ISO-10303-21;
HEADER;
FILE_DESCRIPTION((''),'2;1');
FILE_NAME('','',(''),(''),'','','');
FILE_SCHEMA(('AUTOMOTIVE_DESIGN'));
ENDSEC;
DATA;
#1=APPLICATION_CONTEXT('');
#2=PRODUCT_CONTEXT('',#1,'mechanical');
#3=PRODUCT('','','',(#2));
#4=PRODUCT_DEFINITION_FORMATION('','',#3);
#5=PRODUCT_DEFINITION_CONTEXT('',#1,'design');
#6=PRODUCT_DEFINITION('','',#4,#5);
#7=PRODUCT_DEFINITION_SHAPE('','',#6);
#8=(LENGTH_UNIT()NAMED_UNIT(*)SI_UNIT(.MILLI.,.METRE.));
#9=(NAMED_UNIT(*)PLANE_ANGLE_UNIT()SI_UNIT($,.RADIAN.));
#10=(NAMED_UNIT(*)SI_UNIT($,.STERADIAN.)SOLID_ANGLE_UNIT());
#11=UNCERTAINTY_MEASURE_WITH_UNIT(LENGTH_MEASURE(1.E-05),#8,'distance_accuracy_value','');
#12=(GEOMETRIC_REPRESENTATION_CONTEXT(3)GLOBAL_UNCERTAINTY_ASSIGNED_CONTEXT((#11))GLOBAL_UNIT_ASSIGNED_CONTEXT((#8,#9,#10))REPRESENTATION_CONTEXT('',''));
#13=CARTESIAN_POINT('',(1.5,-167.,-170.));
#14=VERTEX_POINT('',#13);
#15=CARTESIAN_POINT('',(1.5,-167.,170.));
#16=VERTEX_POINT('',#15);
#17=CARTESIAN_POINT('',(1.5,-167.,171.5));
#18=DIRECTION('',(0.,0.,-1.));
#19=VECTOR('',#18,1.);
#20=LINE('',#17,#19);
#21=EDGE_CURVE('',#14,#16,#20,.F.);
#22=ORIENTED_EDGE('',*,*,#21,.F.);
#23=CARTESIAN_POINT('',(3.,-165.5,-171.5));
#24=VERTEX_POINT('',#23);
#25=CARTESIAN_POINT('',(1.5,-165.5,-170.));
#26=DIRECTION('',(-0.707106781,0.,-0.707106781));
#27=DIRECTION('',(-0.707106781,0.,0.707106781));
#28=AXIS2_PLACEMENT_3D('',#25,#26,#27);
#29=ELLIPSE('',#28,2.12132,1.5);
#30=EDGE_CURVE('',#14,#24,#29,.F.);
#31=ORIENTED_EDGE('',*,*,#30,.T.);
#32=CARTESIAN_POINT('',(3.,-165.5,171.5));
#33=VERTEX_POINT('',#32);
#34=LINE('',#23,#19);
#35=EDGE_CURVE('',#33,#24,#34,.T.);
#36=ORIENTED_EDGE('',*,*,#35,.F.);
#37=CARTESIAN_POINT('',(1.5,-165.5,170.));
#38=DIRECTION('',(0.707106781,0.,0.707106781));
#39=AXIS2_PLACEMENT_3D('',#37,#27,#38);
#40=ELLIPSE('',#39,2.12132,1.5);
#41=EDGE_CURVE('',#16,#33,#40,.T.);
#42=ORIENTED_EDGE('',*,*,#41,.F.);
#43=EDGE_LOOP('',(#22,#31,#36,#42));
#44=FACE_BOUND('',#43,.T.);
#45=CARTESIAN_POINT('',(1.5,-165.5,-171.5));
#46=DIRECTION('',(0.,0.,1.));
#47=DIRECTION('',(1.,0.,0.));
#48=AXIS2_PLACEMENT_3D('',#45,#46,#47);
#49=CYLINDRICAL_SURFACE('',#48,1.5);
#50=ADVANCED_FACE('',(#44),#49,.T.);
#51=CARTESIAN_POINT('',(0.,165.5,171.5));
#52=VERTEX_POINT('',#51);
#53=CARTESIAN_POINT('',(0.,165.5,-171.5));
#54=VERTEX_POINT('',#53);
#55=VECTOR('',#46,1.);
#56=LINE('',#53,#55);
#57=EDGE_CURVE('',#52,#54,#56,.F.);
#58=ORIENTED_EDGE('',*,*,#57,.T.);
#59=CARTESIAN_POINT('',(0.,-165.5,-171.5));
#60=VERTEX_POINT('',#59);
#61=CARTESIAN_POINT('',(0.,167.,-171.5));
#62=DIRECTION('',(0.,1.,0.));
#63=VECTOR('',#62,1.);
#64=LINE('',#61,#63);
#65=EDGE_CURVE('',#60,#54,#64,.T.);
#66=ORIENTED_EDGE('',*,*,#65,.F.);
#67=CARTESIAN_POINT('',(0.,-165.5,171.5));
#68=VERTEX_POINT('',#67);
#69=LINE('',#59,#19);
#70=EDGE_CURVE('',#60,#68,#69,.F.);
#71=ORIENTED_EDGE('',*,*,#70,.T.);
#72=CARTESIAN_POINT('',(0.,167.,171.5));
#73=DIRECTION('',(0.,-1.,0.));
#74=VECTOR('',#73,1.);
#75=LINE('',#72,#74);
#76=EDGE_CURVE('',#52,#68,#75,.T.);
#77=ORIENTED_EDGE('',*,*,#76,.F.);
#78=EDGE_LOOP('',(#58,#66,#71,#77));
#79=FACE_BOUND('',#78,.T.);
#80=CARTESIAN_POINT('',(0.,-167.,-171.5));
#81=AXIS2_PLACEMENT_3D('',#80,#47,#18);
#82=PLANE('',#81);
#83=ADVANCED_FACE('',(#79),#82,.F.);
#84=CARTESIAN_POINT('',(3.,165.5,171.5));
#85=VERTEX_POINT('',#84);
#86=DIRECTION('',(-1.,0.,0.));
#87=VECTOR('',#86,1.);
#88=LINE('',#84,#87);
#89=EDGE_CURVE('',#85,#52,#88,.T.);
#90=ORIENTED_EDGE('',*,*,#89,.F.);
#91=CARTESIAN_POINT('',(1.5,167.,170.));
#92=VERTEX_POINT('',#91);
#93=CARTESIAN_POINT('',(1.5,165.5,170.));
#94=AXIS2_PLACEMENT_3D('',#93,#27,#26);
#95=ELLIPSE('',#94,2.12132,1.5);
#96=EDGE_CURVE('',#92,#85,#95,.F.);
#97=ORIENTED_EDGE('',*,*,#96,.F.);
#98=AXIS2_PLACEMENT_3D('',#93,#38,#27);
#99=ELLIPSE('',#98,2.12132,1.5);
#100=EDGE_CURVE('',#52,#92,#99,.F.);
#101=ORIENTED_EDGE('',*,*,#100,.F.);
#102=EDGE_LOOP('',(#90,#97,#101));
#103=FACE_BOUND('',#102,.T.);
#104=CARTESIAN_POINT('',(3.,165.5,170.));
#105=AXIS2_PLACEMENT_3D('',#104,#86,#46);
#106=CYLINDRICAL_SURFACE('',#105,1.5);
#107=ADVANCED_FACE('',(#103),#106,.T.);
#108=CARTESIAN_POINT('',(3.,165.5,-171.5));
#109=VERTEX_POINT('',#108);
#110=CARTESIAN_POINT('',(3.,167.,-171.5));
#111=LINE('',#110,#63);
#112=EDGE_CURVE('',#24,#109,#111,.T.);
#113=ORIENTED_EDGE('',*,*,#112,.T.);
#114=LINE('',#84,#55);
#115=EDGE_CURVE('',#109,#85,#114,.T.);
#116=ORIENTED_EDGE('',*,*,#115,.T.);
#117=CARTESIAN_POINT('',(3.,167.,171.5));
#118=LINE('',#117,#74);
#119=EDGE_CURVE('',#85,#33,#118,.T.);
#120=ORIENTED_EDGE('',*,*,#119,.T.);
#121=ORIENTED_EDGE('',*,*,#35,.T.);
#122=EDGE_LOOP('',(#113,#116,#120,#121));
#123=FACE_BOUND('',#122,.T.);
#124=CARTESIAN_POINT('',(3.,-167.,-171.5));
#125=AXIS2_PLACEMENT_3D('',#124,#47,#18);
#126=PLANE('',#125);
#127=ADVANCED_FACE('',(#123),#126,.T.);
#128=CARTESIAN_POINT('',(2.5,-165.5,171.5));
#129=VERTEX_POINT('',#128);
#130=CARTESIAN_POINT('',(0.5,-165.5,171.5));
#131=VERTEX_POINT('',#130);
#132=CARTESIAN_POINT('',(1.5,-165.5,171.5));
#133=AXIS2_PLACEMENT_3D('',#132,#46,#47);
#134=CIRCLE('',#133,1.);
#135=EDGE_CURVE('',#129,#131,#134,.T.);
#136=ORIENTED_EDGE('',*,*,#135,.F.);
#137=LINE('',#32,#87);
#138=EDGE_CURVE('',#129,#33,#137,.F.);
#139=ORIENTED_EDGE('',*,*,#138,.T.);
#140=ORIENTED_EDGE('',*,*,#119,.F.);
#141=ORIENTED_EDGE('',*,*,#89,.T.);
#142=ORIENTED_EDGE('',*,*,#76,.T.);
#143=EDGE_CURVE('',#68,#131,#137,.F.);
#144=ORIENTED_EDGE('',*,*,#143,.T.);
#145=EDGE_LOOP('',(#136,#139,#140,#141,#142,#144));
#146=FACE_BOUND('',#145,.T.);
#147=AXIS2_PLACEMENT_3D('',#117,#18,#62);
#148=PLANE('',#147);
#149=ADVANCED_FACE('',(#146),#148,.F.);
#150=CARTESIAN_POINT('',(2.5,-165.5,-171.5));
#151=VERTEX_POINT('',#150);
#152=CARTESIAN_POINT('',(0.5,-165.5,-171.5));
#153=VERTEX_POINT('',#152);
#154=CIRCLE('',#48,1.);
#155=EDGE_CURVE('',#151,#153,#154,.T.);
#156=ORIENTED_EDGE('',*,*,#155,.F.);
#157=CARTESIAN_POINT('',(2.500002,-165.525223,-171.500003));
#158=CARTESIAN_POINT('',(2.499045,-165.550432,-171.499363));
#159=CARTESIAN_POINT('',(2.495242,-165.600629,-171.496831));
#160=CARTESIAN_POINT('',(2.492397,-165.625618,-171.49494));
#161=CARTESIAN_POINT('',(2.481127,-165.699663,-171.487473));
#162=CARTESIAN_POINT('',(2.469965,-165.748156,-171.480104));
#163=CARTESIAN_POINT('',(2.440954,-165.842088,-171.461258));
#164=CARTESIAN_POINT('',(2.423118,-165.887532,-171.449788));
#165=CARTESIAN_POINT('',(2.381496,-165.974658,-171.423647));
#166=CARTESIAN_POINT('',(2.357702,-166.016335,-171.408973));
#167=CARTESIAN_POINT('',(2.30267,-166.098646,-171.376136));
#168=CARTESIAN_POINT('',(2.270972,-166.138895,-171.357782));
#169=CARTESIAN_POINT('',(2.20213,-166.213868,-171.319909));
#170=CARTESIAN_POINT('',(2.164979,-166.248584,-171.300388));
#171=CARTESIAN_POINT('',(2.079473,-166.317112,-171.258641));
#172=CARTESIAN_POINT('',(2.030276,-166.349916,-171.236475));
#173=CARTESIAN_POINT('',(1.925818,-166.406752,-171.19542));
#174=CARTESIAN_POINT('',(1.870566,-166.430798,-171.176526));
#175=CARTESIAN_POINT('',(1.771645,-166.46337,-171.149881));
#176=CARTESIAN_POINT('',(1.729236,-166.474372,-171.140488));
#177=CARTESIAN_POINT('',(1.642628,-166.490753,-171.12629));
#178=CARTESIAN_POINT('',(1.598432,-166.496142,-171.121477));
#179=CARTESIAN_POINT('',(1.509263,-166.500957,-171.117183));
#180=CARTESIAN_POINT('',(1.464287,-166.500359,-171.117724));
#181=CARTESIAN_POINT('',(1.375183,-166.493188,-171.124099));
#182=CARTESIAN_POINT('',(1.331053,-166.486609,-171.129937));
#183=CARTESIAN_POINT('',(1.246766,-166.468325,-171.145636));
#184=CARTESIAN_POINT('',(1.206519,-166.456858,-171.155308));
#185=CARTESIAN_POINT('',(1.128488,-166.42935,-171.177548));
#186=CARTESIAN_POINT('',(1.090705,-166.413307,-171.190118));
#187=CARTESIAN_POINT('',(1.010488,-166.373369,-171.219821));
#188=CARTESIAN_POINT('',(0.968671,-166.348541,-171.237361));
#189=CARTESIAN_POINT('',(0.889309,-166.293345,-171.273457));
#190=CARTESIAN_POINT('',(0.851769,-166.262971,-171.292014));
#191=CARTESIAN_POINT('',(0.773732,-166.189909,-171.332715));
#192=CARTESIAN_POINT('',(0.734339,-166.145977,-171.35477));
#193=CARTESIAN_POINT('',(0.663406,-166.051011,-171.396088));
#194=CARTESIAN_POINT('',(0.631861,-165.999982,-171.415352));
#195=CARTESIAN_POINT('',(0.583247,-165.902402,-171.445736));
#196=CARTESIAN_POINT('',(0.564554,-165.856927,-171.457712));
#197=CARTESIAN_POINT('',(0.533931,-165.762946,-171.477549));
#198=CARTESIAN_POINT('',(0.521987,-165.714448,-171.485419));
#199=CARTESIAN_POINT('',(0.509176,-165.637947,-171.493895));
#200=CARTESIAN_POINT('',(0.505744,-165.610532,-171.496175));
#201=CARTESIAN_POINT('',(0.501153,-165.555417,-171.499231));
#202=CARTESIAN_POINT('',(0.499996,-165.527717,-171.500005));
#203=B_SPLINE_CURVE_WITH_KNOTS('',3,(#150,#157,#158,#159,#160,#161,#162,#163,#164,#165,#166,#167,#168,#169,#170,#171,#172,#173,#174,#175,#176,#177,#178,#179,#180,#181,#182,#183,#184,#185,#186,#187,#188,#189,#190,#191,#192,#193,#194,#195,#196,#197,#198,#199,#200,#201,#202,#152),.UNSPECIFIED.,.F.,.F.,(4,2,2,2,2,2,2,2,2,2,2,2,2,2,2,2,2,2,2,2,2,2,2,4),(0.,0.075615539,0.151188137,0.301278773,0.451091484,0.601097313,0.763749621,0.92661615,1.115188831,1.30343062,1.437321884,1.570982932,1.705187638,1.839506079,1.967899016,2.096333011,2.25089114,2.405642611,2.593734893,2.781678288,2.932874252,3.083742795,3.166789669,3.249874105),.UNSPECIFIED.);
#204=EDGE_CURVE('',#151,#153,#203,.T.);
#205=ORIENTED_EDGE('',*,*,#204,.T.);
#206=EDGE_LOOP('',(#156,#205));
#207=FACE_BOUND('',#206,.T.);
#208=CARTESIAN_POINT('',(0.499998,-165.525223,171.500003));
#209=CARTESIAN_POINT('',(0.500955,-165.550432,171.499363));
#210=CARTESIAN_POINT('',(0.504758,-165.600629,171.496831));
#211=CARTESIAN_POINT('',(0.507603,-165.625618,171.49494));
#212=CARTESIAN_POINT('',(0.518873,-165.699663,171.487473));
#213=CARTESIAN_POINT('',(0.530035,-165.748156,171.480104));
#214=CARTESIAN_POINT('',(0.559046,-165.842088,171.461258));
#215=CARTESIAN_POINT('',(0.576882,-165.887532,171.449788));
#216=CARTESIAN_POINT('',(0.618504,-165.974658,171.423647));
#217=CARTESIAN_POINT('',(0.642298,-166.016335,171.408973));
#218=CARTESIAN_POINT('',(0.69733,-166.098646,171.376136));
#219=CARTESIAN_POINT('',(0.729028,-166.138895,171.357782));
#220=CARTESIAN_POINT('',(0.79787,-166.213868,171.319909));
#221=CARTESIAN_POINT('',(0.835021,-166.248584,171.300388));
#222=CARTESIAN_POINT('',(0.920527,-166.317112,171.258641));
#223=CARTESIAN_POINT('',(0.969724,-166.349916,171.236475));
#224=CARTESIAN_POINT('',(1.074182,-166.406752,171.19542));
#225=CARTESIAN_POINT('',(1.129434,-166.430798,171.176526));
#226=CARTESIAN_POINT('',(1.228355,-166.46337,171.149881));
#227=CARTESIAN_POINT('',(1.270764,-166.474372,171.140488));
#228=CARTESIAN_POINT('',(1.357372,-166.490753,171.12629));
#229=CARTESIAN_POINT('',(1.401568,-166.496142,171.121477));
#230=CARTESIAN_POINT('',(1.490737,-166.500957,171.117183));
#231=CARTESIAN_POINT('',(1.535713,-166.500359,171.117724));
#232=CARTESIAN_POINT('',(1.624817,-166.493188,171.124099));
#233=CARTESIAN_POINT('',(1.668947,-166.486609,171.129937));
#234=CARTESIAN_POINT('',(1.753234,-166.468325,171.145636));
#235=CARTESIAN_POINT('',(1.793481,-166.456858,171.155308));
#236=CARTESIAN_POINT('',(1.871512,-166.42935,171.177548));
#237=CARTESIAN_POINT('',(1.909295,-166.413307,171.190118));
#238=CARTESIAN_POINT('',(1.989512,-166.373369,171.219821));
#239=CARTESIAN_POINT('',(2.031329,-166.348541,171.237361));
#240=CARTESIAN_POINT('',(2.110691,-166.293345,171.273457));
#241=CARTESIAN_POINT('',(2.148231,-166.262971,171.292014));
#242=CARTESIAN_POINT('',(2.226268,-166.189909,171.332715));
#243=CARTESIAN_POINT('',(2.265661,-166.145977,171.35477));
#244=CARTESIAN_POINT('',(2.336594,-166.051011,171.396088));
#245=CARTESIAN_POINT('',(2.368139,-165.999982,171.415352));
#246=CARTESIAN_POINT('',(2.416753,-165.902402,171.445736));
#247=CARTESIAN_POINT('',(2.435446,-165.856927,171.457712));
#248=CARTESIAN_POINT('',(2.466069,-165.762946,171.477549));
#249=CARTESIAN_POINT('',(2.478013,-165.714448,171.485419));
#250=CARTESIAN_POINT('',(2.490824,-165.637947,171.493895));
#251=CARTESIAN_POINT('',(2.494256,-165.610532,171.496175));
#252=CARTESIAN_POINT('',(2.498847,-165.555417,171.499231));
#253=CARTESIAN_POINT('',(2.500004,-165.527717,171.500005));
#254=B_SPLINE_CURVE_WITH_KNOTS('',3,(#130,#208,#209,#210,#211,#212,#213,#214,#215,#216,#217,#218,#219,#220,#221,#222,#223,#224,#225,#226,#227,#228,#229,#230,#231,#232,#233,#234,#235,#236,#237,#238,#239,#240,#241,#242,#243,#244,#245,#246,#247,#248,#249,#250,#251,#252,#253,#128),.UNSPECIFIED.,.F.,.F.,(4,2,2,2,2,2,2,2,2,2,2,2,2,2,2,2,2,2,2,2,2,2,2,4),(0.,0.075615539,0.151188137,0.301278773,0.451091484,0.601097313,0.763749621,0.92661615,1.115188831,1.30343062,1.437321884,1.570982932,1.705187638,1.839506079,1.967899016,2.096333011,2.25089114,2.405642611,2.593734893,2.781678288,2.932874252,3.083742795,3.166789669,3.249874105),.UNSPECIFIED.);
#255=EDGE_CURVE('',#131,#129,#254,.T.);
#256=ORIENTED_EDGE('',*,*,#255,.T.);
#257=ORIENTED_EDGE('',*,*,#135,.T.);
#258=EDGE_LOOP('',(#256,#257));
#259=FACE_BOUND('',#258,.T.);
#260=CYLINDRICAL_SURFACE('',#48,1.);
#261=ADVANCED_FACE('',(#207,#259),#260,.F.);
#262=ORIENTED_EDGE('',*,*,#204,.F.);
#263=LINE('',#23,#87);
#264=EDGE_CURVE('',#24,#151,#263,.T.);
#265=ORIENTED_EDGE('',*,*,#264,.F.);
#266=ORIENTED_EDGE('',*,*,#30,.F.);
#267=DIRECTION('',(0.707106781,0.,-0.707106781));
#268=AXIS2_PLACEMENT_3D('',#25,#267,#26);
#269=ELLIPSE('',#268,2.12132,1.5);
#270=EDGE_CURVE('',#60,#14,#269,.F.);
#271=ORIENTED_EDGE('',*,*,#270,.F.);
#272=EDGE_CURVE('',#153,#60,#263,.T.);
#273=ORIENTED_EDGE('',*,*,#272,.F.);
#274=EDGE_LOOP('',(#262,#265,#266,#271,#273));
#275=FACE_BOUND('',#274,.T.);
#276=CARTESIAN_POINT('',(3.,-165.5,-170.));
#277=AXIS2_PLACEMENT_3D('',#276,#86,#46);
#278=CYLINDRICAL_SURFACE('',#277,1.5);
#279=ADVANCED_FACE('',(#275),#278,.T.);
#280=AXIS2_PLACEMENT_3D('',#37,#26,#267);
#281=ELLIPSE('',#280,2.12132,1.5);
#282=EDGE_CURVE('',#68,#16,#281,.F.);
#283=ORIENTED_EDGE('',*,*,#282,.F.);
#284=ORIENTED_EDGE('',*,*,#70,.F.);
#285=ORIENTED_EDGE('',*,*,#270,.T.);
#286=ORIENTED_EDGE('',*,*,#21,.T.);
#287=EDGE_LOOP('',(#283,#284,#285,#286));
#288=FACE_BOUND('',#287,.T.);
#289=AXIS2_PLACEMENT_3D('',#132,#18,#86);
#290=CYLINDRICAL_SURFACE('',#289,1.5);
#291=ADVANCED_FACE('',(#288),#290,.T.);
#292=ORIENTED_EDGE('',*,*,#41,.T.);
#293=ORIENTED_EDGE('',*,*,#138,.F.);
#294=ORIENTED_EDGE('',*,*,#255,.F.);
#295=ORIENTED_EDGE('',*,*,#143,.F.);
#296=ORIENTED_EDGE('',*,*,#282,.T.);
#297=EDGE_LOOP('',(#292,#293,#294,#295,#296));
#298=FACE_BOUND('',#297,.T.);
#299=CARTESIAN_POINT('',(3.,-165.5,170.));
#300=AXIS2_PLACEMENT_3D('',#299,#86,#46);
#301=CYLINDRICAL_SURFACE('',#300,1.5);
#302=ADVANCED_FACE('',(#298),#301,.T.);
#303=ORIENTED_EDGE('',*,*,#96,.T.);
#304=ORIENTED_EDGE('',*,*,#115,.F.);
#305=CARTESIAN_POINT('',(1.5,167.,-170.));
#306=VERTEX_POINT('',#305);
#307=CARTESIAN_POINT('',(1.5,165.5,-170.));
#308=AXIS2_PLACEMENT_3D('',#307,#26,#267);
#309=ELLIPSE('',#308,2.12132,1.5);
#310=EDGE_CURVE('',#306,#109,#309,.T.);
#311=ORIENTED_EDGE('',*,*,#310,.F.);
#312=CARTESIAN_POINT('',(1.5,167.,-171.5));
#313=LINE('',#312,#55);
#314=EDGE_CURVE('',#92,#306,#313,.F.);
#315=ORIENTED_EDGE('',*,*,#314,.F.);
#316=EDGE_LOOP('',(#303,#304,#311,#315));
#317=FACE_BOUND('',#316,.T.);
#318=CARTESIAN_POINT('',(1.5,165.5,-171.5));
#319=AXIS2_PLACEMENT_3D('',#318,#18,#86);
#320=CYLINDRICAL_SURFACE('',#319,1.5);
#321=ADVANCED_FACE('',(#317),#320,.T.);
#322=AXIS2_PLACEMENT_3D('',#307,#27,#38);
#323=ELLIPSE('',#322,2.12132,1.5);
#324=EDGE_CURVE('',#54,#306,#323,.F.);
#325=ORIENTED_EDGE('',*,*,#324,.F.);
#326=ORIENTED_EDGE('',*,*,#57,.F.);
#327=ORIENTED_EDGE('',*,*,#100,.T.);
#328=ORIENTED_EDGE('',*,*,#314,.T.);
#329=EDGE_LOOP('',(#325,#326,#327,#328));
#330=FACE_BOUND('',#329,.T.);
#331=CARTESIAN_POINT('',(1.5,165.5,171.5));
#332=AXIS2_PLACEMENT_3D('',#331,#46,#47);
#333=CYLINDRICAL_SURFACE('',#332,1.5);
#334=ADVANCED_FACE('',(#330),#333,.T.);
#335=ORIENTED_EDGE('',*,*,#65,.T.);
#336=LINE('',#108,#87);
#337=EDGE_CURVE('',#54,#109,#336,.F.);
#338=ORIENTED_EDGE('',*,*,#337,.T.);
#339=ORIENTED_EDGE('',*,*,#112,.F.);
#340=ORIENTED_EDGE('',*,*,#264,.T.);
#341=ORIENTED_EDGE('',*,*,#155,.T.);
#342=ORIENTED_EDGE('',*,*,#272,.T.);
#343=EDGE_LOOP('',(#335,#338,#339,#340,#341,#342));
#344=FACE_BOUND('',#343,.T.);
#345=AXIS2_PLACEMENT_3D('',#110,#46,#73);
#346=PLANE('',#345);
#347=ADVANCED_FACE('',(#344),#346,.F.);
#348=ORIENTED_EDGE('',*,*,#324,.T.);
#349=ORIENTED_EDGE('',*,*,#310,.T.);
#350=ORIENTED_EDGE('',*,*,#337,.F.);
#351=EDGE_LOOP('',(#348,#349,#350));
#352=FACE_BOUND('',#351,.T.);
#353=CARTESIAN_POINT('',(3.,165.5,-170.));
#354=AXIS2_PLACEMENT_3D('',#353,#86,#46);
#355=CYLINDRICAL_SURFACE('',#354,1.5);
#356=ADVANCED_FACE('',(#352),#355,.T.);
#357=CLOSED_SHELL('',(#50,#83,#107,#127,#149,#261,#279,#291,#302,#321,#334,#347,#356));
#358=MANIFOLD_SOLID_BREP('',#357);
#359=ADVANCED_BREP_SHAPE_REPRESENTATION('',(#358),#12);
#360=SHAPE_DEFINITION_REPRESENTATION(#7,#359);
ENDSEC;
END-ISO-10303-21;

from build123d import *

# Parameters (mm, degrees)
SKETCH_1_W          = 343
SKETCH_1_H          = 334
EXTRUDE_1_DEPTH     = 3
SKETCH_3_R          = 1
CUT_EXTRUDE_1_DEPTH = 382.506225375
FILLET_1_R          = 1.5
FILLET_2_R          = 1.5


# Some blends are built 0.0001 mm under size
with BuildPart() as part:
    # 草图1 → 凸台-拉伸1 (new body)
    with BuildSketch(Plane(origin=(0, 0, 0), x_dir=(0, 0, -1), z_dir=(1, 0, 0))):
        Rectangle(SKETCH_1_W, SKETCH_1_H)
    extrude(amount=EXTRUDE_1_DEPTH)

    # 草图3 → 切除-拉伸1 (cut, through all)
    with BuildSketch(Plane.XY.offset(171.5)):
        with Locations((1.5, -165.5)):
            Circle(SKETCH_3_R)
    extrude(amount=-CUT_EXTRUDE_1_DEPTH, mode=Mode.SUBTRACT)

    # 圆角1
    # the kernel refuses this fillet: 1.5 mm, written as the material it takes off along each edge
    with BuildSketch(Plane(origin=(3, -167, -175.25), x_dir=(0, 1, 0), z_dir=(0, 0, 1))) as fillet_1_piece_1:
        with BuildLine():
            CenterArc((FILLET_1_R, FILLET_1_R), FILLET_1_R, 180, 90)
            Line((0, FILLET_1_R), (0, 0))
            Line((0, 0), (FILLET_1_R, 0))
        make_face()
    extrude(amount=350.5, mode=Mode.SUBTRACT)
    with BuildSketch(Plane(origin=(0, -167, -175.25), x_dir=(0, 1, 0), z_dir=(0, 0, 1))) as fillet_1_piece_2:
        with BuildLine():
            CenterArc((FILLET_1_R, -FILLET_1_R), FILLET_1_R, 90, 90)
            Line((0, -FILLET_1_R), (0, 0))
            Line((0, 0), (FILLET_1_R, 0))
        make_face()
    extrude(amount=350.5, mode=Mode.SUBTRACT)
    with BuildSketch(Plane(origin=(-3.75, -167, -171.5), x_dir=(0, 1, 0), z_dir=(1, 0, 0))) as fillet_1_piece_3:
        with BuildLine():
            CenterArc((FILLET_1_R, FILLET_1_R), FILLET_1_R, 180, 90)
            Line((0, FILLET_1_R), (0, 0))
            Line((0, 0), (FILLET_1_R, 0))
        make_face()
    extrude(amount=10.5, mode=Mode.SUBTRACT)
    with BuildSketch(Plane(origin=(-3.75, -167, 171.5), x_dir=(0, 1, 0), z_dir=(1, 0, 0))) as fillet_1_piece_4:
        with BuildLine():
            CenterArc((FILLET_1_R, -FILLET_1_R), FILLET_1_R, 90, 90)
            Line((0, -FILLET_1_R), (0, 0))
            Line((0, 0), (FILLET_1_R, 0))
        make_face()
    extrude(amount=10.5, mode=Mode.SUBTRACT)

    # 圆角2
    fillet_2_edges = [part.edges().sort_by_distance(p)[0] for p in [
        (0, 167, 0),
        (3, 167, 0),
        (1.5, 167, 171.5),
        (1.5, 167, -171.5),
    ]]
    fillet(fillet_2_edges, radius=FILLET_2_R - 0.0001)  # a hair under: the kernel refuses the full size


solid = part.part
